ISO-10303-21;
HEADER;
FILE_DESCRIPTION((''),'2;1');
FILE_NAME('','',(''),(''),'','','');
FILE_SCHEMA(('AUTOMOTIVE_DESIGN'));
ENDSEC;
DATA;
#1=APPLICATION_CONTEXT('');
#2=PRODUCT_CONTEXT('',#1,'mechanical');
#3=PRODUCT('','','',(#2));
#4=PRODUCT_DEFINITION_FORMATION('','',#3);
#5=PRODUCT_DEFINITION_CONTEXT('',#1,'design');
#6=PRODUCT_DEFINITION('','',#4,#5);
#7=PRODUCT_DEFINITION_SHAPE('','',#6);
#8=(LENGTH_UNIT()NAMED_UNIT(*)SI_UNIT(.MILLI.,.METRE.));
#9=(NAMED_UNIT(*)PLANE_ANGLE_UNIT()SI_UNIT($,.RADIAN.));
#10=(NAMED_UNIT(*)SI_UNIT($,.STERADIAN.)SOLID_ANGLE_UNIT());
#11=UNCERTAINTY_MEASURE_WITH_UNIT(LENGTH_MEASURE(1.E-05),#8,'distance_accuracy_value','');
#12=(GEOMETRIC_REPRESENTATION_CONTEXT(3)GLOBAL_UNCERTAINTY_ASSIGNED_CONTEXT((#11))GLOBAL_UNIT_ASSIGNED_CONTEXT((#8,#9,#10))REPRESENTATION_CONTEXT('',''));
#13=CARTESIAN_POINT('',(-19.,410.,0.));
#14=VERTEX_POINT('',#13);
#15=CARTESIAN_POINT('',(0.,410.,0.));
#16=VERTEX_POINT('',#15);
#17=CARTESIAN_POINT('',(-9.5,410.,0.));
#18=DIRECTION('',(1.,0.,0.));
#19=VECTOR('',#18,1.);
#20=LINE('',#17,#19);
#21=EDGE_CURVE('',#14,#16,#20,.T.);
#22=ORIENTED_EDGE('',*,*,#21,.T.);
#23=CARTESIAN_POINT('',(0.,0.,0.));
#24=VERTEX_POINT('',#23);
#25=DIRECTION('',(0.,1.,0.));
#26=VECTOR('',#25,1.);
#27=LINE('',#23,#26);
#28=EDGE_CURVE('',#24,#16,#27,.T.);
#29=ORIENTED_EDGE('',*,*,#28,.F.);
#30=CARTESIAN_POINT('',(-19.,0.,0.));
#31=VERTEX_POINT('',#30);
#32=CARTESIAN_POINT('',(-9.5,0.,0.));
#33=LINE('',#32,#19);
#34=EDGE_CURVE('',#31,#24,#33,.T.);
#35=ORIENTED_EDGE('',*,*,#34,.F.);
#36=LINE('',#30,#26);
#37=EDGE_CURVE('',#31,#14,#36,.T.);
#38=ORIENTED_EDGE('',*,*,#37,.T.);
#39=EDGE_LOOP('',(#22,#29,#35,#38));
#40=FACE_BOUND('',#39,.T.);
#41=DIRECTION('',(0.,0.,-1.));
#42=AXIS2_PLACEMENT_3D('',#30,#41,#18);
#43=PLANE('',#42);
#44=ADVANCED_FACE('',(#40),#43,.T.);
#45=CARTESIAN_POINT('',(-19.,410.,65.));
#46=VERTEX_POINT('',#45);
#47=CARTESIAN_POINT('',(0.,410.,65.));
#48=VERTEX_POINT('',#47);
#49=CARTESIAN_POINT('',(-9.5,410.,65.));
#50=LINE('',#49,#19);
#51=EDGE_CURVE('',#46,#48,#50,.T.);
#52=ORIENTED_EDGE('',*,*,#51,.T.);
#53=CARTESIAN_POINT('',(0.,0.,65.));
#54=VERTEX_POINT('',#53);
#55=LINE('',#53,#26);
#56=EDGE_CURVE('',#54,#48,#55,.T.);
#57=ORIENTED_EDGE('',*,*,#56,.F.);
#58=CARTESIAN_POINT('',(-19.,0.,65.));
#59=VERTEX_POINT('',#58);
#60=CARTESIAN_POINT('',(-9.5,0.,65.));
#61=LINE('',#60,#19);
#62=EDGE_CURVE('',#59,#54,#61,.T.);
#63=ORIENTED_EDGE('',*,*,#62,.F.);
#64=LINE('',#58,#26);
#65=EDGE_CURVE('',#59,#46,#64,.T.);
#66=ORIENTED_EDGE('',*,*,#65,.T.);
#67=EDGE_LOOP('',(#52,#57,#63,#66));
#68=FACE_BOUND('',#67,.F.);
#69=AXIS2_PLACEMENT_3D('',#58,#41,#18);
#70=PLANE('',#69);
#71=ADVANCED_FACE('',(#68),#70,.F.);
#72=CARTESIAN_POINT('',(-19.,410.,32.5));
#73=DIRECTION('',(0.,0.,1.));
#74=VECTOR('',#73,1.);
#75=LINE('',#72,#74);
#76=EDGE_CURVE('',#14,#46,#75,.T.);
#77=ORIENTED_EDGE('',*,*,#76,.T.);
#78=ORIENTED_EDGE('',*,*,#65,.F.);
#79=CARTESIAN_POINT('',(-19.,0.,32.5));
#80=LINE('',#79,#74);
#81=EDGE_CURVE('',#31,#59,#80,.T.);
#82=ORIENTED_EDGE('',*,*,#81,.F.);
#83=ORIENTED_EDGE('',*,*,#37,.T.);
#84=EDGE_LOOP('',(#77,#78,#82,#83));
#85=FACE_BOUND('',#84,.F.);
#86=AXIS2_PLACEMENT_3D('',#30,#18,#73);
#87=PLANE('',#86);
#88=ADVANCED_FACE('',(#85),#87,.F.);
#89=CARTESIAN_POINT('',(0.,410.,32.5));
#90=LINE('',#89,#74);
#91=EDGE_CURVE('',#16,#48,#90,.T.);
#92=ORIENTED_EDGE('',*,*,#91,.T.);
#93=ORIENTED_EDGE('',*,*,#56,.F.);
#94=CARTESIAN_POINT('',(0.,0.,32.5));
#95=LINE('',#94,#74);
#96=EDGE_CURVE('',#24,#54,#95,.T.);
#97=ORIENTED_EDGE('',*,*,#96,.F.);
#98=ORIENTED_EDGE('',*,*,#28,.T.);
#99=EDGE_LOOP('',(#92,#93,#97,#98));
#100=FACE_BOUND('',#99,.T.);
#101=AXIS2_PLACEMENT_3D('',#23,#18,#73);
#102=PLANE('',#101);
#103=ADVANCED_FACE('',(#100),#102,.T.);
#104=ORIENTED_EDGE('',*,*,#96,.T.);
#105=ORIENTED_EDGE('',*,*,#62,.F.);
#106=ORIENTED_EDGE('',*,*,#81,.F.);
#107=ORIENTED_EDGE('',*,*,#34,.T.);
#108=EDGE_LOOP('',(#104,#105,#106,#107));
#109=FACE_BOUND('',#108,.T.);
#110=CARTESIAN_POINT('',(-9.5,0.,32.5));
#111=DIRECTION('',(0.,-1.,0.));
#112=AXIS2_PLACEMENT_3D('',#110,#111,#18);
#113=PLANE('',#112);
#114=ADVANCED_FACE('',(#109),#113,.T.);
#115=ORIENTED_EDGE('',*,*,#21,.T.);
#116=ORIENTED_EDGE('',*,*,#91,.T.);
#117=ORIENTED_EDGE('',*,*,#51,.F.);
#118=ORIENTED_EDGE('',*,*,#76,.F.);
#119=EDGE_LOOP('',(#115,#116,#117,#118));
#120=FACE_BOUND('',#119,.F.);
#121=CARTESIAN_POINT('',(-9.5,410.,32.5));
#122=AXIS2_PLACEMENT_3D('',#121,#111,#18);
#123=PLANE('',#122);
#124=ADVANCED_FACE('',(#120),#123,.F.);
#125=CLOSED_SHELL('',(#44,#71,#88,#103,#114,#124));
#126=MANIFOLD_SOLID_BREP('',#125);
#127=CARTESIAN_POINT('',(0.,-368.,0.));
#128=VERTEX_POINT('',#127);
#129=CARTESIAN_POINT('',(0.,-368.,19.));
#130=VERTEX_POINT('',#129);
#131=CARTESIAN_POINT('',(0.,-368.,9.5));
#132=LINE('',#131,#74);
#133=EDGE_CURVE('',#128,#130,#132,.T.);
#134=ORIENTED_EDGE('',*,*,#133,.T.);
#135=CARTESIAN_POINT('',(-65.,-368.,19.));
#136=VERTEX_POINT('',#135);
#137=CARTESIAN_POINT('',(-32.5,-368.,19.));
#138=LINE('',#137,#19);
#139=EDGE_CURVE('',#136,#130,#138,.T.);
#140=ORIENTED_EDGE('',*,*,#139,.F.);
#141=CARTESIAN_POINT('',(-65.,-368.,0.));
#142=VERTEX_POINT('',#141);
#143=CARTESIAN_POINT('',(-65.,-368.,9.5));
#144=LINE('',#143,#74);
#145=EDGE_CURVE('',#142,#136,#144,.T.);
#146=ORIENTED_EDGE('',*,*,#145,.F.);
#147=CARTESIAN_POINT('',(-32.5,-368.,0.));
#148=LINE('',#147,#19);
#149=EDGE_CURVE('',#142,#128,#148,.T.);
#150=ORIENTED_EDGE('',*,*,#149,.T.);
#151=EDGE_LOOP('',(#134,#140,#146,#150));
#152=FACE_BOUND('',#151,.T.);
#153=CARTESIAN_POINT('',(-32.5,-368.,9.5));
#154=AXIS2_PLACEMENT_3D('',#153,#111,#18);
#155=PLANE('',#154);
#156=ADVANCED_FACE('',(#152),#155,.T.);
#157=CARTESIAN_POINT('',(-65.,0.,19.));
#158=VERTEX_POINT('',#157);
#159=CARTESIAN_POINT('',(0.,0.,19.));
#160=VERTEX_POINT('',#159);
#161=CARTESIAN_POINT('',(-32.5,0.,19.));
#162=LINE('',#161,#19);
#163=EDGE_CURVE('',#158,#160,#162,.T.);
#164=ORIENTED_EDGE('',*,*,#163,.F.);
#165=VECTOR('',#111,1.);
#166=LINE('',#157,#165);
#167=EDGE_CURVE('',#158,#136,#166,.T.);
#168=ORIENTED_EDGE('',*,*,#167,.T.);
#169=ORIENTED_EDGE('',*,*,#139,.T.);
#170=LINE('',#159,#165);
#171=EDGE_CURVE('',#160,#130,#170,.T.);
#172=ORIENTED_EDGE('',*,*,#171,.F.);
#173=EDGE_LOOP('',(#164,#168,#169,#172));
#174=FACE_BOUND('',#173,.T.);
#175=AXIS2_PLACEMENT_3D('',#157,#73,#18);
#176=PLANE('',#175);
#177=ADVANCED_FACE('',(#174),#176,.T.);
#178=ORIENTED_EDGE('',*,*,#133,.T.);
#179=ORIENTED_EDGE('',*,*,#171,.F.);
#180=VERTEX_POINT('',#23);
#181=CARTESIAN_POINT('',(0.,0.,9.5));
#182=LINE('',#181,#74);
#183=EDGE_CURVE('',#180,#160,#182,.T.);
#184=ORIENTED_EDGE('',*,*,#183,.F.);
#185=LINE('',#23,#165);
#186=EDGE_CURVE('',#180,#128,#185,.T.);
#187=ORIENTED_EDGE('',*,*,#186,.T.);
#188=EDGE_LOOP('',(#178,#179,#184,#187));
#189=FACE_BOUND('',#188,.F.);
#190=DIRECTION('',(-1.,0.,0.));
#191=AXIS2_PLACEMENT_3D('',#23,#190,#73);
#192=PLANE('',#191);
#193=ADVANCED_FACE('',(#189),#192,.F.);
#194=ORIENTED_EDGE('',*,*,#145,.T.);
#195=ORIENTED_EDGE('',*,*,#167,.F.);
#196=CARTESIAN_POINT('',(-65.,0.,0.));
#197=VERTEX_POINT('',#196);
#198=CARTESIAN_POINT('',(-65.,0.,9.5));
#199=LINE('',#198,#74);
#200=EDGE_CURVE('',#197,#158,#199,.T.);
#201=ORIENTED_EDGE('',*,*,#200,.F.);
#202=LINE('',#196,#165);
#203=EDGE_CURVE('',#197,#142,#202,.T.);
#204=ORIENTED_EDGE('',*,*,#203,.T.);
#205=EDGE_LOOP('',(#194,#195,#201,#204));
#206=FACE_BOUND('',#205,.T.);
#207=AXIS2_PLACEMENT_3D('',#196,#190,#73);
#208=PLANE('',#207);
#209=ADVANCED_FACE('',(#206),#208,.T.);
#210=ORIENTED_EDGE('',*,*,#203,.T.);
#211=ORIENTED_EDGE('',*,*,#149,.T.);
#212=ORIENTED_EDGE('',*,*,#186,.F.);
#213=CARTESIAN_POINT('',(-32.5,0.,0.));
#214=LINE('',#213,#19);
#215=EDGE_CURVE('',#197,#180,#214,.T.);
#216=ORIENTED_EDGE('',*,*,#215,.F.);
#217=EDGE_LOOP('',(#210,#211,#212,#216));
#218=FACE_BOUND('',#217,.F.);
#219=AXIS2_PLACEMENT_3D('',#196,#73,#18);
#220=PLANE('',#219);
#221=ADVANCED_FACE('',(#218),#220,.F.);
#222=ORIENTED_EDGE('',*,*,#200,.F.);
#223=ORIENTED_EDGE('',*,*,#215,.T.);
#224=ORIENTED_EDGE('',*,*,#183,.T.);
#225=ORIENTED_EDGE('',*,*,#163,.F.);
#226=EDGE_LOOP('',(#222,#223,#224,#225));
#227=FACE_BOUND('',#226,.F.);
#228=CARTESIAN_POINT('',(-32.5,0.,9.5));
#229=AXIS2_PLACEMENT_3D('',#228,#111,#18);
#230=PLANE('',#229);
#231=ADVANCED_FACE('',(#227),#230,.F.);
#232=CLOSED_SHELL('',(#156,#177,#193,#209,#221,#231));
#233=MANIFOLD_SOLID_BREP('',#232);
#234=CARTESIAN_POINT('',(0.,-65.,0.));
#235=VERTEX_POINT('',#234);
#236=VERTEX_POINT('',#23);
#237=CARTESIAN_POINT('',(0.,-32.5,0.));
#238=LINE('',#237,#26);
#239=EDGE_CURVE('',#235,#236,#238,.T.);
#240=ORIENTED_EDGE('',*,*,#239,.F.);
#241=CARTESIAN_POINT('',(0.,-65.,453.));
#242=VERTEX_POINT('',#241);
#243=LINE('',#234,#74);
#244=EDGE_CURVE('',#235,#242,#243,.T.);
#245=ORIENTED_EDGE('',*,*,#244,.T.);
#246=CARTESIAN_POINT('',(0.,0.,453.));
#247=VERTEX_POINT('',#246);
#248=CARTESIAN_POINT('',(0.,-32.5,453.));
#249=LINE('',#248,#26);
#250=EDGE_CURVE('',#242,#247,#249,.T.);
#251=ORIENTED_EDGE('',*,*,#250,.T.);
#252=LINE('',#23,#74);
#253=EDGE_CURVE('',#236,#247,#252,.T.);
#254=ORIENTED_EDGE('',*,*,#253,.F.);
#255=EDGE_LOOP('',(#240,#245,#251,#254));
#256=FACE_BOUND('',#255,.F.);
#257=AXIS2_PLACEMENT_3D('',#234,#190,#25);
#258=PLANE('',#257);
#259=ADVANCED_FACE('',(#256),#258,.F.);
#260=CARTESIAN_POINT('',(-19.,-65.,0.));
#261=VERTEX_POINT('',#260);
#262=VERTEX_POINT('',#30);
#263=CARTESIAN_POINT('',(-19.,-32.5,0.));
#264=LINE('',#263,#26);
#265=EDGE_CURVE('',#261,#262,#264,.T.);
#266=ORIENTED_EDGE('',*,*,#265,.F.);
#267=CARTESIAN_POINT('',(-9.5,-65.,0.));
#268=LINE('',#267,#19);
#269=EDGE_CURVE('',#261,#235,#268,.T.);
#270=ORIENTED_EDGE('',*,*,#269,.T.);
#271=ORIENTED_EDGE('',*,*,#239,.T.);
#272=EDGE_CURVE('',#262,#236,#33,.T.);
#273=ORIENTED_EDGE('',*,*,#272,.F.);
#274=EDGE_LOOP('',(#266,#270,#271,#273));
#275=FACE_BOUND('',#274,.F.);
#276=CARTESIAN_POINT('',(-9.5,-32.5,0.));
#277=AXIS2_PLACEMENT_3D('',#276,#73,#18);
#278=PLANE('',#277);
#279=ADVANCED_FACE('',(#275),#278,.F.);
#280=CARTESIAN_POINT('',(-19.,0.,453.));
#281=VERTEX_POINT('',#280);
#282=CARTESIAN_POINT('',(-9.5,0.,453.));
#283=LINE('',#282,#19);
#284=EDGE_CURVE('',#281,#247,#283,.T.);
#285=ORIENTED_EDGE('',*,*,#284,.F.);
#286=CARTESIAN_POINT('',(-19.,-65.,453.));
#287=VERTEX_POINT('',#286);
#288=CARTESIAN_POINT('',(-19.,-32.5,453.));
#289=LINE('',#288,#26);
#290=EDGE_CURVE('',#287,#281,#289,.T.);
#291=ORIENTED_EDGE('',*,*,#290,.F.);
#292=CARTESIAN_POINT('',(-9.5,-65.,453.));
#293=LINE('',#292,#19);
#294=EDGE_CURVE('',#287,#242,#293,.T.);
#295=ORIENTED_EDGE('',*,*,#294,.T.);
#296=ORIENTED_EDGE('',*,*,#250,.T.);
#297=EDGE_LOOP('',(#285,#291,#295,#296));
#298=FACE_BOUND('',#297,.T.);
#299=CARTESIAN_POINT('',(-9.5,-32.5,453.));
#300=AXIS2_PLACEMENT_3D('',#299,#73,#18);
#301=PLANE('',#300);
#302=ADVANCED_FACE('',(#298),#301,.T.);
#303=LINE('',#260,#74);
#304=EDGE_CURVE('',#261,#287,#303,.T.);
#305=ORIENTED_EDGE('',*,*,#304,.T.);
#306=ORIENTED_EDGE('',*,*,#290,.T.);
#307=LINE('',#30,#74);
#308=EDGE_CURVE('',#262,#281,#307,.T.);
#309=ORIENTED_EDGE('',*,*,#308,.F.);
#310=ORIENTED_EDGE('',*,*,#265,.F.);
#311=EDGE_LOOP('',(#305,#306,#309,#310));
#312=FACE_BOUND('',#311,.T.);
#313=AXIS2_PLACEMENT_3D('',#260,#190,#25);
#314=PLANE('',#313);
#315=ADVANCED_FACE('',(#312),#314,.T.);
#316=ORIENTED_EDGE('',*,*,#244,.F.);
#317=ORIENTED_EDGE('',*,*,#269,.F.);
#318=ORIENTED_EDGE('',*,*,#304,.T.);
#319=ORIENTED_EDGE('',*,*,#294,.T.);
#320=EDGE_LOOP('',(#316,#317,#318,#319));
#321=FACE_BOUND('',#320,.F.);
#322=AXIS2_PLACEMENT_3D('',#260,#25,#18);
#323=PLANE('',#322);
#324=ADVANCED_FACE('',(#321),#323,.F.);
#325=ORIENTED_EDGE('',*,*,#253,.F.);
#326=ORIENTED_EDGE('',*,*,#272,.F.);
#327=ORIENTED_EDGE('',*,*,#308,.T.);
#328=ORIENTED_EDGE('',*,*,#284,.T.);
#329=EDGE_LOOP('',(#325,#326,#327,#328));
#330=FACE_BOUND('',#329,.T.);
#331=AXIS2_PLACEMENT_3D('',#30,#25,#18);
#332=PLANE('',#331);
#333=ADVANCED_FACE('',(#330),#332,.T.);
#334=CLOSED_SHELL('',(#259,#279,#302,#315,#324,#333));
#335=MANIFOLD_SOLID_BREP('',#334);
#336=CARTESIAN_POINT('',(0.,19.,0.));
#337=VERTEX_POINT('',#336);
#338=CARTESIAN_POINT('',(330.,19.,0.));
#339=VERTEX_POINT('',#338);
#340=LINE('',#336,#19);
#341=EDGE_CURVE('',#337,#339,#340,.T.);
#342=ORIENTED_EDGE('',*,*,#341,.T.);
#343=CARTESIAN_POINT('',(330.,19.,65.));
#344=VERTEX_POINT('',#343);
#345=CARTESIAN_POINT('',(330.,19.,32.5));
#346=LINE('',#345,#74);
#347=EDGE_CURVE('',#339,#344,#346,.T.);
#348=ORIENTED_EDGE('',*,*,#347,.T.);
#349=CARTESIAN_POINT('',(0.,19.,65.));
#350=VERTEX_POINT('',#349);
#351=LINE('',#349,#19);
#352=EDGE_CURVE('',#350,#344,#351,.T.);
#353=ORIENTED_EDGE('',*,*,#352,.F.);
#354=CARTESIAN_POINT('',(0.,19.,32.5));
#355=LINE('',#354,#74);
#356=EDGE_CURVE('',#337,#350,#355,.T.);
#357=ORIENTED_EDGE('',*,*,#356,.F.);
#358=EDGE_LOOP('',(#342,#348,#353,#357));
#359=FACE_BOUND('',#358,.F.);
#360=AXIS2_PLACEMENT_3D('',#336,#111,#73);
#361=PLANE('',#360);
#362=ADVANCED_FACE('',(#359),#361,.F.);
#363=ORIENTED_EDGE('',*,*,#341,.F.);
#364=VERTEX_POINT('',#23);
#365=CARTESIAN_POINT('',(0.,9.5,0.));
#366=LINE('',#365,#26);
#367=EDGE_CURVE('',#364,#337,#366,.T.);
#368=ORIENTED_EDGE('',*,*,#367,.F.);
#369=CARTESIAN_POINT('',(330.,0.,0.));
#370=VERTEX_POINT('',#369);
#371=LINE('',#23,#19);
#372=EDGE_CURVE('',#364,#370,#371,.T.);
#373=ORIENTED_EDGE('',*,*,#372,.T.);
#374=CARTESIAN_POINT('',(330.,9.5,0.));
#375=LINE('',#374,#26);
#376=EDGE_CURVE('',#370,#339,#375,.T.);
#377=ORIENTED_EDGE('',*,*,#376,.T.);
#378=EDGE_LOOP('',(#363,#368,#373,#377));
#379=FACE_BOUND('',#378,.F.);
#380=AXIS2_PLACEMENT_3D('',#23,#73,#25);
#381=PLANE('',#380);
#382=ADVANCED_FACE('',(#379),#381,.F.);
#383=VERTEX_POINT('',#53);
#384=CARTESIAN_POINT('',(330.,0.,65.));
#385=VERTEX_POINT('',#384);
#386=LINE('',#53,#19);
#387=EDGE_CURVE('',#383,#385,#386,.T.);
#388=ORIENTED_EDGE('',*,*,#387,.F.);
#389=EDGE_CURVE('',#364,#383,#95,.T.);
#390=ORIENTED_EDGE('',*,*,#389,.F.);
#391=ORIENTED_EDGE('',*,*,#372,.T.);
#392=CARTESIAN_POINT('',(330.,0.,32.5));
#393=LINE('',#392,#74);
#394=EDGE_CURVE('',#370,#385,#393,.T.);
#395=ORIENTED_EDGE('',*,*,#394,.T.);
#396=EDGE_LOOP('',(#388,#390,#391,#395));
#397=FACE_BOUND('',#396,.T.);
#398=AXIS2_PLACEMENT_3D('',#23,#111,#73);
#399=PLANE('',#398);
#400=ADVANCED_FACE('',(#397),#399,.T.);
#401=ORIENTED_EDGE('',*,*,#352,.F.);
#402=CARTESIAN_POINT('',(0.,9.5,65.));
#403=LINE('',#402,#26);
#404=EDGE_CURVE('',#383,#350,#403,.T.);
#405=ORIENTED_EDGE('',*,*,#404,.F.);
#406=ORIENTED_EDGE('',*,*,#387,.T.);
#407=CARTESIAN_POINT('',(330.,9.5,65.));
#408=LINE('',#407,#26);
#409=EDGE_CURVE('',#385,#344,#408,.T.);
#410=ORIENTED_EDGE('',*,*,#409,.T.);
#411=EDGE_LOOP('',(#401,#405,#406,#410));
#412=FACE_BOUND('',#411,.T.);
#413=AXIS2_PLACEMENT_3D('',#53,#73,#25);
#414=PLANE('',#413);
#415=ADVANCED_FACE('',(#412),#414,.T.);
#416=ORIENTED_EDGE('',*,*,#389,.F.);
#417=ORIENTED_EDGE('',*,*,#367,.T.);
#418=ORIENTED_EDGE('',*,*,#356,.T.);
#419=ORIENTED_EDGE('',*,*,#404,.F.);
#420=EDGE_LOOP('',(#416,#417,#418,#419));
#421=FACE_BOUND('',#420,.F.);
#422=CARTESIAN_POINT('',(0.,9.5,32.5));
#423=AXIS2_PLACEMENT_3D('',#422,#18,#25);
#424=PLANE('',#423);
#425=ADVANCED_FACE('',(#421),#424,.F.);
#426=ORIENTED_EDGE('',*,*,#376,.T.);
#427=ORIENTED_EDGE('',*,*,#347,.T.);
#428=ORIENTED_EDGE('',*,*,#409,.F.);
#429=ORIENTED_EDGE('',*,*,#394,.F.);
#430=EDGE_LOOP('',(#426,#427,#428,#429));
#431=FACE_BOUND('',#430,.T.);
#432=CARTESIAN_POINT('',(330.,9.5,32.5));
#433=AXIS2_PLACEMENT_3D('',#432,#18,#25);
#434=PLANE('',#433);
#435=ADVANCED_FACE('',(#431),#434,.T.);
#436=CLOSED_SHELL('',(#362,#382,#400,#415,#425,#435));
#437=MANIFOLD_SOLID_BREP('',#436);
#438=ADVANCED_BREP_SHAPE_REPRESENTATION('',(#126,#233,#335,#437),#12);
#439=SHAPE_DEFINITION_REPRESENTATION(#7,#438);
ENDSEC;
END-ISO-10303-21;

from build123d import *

# Parameters (mm, degrees)
F0_W     = 19
F0_H     = 65
F1_DEPTH = 330
F3_W     = 19
F3_H     = 65
F4_DEPTH = 410
F2_W     = 19
F2_H     = 65
F5_DEPTH = 453
F6_W     = 65
F6_H     = 19
F7_DEPTH = 368


# Not quite as in the source:
# - a feature names something its author has since deleted; it is built from what else it names


with BuildPart() as f1:
    # F0 (on Right) → F1 (new body)
    with BuildSketch(Plane.YZ):
        with Locations((9.5, 32.5)):
            Rectangle(F0_W, F0_H)
    extrude(amount=F1_DEPTH)


with BuildPart() as f4:
    # F3 (on Front) → F4 (new body)
    with BuildSketch(Plane.XZ):
        with Locations((-9.5, 32.5)):
            Rectangle(F3_W, F3_H)
    extrude(amount=-F4_DEPTH)


with BuildPart() as f5:
    # F2 (on Top) → F5 (new body)
    with BuildSketch(Plane.XY):
        with Locations((-9.5, -32.5)):
            Rectangle(F2_W, F2_H)
    extrude(amount=F5_DEPTH)


with BuildPart() as f7:
    # F6 (on Front) → F7 (new body)
    with BuildSketch(Plane.XZ):
        with Locations((-32.5, 9.5)):
            Rectangle(F6_W, F6_H)
    extrude(amount=F7_DEPTH)


solid = Compound([f1.part, f4.part, f5.part, f7.part])
